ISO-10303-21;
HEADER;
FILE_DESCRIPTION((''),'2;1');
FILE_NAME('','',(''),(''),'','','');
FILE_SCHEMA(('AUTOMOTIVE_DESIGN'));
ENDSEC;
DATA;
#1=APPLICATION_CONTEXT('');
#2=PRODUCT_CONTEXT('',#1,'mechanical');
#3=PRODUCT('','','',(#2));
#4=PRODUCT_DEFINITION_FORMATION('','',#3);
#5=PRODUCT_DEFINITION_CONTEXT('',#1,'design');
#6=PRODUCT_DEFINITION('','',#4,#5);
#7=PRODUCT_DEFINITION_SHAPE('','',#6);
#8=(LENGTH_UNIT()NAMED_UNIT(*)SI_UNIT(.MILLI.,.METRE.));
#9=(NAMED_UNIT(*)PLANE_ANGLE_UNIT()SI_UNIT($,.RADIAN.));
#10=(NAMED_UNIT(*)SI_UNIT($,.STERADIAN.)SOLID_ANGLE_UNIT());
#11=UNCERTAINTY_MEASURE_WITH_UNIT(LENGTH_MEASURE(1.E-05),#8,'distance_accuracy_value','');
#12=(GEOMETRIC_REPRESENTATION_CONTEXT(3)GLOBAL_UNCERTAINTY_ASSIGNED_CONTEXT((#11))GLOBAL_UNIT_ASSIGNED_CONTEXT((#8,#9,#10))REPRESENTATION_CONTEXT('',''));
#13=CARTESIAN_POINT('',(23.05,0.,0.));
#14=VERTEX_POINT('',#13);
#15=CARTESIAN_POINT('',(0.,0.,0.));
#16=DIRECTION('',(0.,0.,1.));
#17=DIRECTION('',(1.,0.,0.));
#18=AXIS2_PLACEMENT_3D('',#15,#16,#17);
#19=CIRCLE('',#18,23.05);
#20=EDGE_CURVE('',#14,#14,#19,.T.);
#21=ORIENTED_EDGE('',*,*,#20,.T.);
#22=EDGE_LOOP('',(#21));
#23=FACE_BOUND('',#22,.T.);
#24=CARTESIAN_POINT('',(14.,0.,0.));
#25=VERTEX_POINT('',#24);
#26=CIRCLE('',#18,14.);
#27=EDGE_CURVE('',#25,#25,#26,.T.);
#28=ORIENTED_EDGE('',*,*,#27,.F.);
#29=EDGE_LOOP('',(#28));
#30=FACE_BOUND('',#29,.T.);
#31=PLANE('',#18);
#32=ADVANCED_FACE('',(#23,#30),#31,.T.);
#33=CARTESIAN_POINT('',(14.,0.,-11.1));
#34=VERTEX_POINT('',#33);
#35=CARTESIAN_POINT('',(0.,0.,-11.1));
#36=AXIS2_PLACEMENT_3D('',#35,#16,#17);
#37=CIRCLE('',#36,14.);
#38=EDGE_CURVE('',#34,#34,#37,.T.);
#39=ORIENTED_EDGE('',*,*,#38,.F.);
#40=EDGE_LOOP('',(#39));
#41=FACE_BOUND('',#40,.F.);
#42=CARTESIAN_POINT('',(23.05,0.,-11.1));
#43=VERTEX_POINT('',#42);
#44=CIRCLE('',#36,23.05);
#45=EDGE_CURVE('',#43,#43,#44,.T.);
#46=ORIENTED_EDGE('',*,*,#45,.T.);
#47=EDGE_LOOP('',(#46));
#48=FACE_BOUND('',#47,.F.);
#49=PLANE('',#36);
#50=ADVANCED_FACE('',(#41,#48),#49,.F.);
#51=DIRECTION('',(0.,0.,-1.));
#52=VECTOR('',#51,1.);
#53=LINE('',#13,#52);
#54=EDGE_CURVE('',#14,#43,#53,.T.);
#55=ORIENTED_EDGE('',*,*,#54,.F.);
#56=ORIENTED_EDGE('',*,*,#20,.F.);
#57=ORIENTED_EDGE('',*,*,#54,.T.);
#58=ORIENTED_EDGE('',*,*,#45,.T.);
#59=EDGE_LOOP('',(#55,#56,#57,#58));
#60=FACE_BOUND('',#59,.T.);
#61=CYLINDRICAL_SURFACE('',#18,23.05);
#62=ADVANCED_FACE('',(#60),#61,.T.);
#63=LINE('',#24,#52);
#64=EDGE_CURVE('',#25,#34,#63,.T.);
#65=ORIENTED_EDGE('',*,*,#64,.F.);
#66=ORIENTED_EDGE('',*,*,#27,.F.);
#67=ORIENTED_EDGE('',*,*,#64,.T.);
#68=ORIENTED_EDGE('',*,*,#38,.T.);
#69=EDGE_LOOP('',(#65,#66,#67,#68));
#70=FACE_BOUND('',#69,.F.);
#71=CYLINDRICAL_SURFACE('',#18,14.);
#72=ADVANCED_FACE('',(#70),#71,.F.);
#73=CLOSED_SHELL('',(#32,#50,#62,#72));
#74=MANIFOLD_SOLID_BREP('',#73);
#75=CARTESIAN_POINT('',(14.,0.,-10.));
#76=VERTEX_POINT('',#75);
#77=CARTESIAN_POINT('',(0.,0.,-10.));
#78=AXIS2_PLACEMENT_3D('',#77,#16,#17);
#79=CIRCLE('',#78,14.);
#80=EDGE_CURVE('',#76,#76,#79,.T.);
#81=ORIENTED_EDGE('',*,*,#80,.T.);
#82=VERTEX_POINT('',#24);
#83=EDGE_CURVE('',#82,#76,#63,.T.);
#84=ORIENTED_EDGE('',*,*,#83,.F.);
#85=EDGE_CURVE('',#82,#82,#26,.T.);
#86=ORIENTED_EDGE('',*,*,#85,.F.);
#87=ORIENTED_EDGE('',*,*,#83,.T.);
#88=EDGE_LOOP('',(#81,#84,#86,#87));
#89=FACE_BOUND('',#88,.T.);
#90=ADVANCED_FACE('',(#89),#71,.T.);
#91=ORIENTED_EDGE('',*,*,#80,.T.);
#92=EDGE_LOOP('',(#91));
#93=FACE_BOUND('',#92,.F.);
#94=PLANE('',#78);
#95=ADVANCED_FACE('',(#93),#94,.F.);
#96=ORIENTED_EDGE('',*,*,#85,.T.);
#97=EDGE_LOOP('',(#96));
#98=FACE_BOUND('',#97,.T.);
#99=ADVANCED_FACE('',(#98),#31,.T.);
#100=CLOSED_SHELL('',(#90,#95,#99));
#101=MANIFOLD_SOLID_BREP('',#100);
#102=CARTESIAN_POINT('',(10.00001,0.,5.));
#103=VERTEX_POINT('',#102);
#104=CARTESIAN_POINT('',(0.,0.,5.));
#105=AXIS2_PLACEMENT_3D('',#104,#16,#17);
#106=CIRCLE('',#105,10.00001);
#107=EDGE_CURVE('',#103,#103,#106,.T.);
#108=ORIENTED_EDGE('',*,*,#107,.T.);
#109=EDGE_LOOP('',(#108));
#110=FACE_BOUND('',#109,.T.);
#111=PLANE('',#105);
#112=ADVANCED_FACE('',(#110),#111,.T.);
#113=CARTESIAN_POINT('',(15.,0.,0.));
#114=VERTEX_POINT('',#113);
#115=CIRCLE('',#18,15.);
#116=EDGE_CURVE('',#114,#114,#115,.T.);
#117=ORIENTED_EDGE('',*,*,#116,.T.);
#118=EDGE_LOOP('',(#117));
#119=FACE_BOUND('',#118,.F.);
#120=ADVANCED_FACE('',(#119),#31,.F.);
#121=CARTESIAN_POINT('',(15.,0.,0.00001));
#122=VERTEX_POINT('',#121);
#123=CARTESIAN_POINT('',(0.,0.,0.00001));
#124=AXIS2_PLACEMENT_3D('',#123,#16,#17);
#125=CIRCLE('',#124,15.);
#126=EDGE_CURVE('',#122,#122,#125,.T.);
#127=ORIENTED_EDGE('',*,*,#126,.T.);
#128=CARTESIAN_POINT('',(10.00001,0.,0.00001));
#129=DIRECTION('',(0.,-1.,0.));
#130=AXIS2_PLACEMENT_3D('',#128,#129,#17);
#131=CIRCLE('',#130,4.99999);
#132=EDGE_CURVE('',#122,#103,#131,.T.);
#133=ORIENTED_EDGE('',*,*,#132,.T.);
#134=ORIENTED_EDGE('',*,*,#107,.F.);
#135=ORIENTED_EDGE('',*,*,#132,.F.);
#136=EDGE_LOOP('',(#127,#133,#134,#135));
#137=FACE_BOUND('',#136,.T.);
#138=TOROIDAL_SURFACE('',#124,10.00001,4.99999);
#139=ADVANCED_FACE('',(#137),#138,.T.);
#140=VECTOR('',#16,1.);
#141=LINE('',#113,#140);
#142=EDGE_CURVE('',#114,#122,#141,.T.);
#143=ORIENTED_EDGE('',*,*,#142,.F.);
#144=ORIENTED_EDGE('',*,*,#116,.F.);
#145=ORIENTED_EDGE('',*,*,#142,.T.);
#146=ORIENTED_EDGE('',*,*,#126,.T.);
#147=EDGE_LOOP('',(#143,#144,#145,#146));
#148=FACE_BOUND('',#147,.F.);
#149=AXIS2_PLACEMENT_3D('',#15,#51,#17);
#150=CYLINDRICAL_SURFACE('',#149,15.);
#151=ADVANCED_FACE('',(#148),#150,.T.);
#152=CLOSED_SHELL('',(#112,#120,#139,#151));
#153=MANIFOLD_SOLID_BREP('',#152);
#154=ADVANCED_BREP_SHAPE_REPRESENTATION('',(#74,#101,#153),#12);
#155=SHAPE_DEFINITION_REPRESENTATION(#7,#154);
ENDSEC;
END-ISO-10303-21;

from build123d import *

# Parameters (mm, degrees)
F0_R     = 15
F0_R_2   = 14
F1_DEPTH = 5
F2_DEPTH = 10
F0_R_3   = 23.05
F3_DEPTH = 11.1
F4_R     = 4.99999


# Not quite as in the source:
# - a fillet or chamfer is up to 0.001 mm smaller than in the source, because OpenCascade refuses the exact size


with BuildPart() as f1:
    # F0 (on Top) → F1 (new body)
    with BuildSketch(Plane.XY):
        Circle(F0_R)
        Circle(F0_R_2, mode=Mode.SUBTRACT)
        Circle(F0_R_2)
    extrude(amount=F1_DEPTH)

    # F4 (radius 5 in the source; OpenCascade refuses exactly that, so slightly less here)
    f4_edges = [f1.edges().sort_by_distance(p)[0] for p in [
        (-15, 0, 5),
    ]]
    fillet(f4_edges, radius=F4_R)


with BuildPart() as f2:
    # F0 (on Top) → F2 (new body)
    with BuildSketch(Plane.XY):
        Circle(F0_R_2)
    extrude(amount=-F2_DEPTH)


with BuildPart() as f3:
    # F0 (on Top) → F3 (new body)
    with BuildSketch(Plane.XY):
        Circle(F0_R_3)
        Circle(F0_R, mode=Mode.SUBTRACT)
        Circle(F0_R)
        Circle(F0_R_2, mode=Mode.SUBTRACT)
    extrude(amount=-F3_DEPTH)


solid = Compound([f1.part, f2.part, f3.part])
